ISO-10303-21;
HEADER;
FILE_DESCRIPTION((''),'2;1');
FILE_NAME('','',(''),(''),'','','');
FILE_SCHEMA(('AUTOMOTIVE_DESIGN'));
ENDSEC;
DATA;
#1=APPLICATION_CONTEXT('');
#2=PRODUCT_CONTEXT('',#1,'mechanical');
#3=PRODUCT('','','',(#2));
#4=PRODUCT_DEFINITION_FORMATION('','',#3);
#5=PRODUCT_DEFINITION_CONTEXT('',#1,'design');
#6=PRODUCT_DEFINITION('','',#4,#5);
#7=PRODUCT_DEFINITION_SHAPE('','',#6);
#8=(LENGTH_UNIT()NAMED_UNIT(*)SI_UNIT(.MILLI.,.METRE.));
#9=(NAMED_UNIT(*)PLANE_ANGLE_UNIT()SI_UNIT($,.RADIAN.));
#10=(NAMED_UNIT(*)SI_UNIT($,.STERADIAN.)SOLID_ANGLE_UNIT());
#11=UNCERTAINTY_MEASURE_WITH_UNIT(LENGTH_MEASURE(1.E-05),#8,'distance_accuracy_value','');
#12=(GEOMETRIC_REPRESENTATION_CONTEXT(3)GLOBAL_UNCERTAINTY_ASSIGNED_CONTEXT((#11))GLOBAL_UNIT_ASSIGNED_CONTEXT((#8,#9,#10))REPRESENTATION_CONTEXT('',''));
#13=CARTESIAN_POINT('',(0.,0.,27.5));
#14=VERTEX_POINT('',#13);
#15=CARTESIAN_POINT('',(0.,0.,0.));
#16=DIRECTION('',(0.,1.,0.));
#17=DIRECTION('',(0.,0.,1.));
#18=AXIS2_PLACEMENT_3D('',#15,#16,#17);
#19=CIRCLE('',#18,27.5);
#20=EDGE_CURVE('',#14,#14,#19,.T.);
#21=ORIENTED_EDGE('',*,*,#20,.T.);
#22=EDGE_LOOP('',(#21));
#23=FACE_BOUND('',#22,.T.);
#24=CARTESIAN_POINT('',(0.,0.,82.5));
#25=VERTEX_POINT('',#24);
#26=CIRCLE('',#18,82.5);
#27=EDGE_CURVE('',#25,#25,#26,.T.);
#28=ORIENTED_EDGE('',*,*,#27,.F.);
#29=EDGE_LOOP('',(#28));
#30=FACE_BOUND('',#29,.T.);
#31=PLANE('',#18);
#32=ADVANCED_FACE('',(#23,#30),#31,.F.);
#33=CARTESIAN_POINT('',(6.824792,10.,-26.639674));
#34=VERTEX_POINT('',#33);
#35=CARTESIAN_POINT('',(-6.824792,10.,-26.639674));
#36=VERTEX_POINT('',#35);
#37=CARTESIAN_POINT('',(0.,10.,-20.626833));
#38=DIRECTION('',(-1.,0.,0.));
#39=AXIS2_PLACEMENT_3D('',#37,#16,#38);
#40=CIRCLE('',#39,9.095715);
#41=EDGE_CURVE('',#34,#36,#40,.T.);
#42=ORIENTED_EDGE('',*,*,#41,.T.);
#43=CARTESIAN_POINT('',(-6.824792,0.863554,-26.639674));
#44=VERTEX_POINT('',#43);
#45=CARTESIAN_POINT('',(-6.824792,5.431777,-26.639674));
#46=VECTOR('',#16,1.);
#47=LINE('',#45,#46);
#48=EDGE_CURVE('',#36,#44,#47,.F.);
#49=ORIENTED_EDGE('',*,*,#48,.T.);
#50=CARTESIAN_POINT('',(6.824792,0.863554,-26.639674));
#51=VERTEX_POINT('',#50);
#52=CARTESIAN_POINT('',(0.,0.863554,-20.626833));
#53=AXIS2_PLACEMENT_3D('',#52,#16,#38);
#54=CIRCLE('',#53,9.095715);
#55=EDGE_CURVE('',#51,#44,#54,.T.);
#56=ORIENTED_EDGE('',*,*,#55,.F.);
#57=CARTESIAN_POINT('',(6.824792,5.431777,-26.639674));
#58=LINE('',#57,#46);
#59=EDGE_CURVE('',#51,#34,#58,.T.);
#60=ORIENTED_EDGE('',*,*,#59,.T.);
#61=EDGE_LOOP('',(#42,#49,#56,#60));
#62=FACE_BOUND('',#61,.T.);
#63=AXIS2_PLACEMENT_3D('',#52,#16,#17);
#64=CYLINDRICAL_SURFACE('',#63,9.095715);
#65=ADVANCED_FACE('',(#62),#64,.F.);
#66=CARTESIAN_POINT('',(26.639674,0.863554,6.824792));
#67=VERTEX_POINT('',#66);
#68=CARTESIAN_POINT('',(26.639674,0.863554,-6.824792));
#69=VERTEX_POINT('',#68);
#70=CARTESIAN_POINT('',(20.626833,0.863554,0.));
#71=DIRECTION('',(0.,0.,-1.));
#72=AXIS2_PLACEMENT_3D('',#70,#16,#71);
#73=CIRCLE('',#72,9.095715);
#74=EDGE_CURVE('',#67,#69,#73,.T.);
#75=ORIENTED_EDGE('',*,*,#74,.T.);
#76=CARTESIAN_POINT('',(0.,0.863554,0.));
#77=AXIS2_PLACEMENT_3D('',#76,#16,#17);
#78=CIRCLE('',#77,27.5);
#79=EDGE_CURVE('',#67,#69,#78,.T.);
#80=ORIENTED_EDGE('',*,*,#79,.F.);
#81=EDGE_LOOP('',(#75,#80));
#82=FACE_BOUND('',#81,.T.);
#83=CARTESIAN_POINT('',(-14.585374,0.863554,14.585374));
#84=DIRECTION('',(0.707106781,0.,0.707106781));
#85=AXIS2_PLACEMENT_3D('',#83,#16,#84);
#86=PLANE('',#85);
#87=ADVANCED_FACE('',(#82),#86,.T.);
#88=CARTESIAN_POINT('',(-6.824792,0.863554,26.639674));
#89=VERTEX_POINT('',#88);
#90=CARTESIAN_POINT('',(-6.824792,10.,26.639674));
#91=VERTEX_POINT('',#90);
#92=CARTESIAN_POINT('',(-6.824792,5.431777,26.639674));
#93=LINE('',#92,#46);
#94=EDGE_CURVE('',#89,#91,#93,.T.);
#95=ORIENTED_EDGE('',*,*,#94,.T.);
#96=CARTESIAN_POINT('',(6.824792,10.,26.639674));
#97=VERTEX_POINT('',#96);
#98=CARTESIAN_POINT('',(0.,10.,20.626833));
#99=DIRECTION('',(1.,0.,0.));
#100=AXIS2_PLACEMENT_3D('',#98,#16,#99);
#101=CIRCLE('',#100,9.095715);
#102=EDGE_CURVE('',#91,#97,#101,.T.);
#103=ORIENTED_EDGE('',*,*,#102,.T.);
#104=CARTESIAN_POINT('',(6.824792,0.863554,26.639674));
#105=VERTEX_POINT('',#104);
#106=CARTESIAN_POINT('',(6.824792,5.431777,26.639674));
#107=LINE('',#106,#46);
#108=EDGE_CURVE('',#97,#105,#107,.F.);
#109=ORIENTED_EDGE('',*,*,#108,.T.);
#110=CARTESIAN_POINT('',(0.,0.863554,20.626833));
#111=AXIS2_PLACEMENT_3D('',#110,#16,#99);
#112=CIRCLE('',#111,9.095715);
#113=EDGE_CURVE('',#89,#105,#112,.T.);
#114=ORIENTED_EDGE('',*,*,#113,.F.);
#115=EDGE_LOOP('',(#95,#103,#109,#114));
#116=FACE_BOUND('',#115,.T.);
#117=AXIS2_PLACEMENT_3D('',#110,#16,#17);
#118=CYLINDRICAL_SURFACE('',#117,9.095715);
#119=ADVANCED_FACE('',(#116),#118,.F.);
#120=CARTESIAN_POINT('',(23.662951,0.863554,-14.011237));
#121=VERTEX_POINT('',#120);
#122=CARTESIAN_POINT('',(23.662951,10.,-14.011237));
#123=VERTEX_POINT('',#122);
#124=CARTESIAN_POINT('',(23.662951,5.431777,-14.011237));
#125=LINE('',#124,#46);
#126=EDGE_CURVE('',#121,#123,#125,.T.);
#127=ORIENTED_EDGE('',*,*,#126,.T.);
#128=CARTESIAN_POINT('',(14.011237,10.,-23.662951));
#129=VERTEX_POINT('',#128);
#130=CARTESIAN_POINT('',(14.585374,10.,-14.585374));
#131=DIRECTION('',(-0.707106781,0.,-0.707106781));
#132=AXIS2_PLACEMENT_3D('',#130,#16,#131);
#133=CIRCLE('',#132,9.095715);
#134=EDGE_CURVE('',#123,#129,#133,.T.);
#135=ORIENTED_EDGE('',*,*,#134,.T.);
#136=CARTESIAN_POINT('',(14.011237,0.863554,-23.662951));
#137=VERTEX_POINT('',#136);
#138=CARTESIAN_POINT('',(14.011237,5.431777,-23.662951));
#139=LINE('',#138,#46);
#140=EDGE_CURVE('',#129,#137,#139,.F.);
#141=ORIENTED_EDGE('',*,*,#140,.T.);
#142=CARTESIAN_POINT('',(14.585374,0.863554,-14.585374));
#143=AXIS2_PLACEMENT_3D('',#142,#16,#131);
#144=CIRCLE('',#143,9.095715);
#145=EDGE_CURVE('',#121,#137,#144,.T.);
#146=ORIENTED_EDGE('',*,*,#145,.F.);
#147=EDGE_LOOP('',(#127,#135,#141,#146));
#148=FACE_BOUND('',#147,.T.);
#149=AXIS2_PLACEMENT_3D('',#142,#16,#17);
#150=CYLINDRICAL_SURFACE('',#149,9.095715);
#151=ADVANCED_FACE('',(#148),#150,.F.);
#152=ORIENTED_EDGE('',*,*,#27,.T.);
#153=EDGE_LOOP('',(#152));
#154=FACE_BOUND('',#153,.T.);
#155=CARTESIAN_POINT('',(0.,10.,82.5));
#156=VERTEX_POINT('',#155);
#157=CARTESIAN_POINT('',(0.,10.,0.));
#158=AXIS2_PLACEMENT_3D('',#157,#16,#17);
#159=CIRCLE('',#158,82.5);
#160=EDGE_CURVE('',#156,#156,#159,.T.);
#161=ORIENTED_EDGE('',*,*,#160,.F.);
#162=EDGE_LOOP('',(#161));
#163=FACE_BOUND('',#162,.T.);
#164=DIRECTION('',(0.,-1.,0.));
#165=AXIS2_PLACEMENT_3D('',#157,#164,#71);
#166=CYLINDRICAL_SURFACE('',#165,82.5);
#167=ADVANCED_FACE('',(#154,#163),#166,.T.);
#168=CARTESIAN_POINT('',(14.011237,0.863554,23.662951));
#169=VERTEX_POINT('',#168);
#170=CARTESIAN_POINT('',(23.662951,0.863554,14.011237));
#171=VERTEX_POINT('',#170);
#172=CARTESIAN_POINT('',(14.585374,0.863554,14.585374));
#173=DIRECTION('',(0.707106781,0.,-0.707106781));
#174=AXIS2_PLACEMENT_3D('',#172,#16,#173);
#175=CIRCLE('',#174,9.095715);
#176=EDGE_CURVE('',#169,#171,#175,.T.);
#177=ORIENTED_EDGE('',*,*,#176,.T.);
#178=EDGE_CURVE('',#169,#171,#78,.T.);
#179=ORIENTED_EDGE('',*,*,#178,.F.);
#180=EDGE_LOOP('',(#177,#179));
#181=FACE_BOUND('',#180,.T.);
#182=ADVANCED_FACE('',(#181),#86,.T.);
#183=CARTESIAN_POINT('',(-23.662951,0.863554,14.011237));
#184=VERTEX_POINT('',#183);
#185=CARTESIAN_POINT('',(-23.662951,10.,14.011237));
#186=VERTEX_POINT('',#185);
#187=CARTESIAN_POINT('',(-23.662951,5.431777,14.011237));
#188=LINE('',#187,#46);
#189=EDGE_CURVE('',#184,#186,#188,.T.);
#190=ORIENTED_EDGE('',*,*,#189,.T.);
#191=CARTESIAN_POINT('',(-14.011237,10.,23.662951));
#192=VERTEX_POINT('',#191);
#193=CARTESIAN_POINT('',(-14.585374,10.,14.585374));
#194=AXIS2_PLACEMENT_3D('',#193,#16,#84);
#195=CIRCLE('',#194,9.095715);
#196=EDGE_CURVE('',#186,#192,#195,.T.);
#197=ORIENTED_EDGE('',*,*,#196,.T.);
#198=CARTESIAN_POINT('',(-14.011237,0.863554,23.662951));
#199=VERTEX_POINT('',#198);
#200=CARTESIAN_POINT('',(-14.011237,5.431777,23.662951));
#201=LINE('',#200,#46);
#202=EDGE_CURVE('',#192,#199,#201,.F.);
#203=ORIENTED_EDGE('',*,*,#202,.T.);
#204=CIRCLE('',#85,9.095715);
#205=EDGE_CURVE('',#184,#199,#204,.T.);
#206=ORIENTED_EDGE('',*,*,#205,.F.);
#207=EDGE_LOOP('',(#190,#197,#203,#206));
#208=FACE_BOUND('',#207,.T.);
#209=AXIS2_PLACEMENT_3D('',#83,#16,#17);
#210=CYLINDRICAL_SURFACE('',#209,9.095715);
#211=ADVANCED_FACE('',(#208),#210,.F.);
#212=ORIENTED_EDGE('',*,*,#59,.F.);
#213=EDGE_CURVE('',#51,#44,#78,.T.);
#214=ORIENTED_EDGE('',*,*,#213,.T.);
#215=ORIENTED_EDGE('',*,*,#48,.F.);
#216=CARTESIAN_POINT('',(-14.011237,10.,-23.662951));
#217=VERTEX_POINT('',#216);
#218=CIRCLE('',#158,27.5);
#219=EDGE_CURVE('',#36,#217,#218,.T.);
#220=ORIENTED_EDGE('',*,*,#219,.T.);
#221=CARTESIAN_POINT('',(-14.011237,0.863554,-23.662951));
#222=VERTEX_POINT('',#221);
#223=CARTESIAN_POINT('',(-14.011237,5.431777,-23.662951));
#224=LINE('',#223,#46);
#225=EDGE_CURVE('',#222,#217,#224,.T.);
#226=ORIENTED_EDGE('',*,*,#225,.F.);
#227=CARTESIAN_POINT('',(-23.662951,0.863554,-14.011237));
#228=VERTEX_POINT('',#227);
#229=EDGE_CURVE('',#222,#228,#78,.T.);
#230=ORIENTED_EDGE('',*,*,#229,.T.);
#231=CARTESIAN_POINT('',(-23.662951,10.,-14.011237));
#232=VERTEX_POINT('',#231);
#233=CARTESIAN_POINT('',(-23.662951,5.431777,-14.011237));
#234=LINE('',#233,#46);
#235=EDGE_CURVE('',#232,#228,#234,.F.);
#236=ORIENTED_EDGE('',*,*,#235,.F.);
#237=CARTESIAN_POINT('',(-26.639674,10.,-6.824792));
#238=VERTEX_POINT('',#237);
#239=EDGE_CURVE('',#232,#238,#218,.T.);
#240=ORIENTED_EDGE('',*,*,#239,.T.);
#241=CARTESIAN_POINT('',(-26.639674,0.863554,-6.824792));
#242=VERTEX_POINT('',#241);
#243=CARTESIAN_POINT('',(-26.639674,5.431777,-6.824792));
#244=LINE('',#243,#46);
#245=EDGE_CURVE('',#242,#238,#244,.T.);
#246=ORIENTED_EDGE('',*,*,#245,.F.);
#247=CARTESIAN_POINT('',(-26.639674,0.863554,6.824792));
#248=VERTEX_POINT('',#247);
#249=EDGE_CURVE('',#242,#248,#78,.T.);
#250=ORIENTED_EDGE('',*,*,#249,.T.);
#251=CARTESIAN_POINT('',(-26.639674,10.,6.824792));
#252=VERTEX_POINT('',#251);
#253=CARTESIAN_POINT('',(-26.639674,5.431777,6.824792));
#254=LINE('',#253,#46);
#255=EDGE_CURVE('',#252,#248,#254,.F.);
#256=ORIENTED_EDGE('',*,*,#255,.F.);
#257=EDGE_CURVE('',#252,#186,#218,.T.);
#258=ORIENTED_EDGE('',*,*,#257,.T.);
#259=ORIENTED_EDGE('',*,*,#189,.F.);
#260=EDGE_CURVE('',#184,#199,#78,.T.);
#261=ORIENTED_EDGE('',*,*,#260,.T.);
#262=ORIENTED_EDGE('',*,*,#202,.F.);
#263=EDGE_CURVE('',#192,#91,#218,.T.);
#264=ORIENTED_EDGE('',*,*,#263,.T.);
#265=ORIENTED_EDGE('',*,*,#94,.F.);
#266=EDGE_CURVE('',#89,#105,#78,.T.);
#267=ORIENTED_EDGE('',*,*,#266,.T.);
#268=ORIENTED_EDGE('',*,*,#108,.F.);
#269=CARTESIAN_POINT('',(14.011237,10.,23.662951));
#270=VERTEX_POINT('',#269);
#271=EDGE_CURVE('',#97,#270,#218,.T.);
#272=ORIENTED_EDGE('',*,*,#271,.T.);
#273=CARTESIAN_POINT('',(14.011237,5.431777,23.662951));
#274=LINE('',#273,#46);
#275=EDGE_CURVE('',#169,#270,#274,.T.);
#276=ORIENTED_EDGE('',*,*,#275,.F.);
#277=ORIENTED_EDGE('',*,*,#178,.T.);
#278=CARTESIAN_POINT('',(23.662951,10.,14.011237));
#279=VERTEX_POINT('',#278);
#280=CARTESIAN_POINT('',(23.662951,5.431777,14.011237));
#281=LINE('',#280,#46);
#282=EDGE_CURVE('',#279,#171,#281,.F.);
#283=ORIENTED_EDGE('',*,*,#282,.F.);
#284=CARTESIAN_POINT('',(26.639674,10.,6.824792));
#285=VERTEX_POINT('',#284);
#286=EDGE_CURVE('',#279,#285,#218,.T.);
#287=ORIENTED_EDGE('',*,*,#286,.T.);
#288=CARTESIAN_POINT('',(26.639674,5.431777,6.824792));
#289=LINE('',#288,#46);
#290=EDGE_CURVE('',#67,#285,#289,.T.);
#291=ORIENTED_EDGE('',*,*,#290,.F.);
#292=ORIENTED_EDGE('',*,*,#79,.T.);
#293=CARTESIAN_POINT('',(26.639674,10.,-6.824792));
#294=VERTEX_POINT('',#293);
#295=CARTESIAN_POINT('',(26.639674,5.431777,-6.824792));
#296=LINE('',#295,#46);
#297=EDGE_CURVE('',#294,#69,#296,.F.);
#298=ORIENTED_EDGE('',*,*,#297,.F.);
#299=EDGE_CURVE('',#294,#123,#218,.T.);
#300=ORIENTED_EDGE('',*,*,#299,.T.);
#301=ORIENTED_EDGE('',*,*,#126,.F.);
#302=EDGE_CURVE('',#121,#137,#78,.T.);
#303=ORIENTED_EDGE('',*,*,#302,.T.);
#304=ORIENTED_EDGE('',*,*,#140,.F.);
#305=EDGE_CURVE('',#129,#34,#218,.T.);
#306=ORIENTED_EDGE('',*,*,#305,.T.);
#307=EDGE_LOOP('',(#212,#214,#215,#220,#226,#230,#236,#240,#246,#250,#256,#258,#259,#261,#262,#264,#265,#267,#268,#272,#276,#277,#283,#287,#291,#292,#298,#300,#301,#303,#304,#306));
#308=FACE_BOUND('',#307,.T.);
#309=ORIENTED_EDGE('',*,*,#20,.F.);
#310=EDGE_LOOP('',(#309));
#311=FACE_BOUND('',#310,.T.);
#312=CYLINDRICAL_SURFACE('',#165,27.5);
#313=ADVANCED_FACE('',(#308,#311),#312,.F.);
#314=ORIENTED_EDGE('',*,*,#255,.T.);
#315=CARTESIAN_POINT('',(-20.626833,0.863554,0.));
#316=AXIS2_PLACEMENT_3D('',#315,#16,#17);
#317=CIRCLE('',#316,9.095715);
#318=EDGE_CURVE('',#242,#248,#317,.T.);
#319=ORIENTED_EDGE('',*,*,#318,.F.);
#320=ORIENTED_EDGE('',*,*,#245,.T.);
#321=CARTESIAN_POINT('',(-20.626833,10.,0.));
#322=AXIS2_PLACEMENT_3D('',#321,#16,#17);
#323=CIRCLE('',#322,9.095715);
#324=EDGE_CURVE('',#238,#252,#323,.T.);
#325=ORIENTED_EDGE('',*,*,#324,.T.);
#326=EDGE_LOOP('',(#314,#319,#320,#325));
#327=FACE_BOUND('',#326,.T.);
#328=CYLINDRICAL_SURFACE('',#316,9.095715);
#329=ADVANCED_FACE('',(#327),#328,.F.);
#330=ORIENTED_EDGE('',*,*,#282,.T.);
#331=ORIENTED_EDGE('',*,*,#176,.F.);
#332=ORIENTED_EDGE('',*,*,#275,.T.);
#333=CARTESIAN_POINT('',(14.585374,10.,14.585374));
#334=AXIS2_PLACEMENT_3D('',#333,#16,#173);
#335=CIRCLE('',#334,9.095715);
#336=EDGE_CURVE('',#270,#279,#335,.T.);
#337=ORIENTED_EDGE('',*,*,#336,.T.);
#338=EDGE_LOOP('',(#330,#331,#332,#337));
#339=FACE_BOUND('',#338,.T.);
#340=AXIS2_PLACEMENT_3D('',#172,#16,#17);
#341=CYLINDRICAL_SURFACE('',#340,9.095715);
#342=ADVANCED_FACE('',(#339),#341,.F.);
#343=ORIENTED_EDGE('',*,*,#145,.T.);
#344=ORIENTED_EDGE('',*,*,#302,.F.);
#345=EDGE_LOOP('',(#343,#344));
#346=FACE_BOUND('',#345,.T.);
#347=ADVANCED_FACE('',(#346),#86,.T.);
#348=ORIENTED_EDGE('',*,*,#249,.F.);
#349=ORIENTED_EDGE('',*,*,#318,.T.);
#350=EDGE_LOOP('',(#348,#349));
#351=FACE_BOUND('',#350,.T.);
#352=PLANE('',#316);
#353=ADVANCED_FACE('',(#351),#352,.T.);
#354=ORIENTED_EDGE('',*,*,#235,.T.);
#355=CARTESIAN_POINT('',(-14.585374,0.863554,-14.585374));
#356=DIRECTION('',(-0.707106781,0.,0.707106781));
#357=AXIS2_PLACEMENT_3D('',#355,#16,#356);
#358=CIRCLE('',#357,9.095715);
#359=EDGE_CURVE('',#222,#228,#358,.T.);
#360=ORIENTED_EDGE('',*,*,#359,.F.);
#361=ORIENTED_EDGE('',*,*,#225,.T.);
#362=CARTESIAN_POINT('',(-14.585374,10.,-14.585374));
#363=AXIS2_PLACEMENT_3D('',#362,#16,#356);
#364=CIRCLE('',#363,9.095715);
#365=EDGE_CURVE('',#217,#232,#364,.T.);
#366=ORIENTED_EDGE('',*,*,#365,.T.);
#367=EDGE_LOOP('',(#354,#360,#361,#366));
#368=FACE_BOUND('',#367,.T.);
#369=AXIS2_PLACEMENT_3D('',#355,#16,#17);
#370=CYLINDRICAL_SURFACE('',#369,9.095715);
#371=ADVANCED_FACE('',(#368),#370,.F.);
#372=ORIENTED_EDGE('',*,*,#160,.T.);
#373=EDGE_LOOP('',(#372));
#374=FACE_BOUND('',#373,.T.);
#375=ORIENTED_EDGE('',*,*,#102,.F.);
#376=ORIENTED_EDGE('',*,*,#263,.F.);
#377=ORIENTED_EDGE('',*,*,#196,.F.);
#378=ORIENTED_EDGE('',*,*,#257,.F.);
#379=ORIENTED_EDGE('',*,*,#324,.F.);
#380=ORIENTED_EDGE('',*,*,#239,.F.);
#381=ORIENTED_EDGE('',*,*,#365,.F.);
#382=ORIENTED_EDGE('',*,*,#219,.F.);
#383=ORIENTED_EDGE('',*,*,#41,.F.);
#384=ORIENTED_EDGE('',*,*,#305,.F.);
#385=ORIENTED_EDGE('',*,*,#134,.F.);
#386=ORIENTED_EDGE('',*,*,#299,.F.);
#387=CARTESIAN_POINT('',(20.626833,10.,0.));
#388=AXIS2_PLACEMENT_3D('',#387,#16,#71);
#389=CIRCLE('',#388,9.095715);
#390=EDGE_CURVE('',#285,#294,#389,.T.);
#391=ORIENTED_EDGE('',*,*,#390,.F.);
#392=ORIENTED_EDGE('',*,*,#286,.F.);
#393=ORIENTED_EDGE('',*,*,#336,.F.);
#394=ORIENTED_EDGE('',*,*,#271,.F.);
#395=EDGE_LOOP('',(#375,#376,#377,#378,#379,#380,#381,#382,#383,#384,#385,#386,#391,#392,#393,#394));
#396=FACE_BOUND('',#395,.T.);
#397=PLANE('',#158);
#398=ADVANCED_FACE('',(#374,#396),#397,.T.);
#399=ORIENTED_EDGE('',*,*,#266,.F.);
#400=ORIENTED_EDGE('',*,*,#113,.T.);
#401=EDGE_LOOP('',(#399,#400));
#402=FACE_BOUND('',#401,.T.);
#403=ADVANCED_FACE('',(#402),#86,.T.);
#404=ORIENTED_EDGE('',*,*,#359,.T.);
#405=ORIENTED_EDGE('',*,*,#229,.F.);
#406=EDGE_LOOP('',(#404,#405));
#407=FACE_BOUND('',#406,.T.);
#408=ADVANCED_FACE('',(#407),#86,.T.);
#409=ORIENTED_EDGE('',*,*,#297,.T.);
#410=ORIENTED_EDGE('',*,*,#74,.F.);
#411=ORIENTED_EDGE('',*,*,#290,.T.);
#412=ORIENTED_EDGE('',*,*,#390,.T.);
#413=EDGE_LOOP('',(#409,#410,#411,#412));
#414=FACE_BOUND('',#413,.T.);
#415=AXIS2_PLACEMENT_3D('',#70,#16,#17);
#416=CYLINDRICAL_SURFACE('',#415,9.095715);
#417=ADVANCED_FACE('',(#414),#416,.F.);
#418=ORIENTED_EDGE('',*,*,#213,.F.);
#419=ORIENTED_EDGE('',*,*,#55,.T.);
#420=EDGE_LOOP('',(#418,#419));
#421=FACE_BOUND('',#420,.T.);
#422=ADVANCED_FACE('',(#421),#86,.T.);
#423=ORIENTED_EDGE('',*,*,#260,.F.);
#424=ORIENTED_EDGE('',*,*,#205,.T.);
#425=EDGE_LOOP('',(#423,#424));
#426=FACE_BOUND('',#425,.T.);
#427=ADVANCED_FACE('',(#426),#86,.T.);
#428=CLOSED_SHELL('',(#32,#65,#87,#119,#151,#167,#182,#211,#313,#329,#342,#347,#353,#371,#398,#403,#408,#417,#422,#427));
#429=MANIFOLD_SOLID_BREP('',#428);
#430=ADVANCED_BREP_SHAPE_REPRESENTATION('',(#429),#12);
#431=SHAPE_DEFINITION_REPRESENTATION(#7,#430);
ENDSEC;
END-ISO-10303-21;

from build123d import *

# Parameters (mm, degrees)
SKETCH1_R           = 82.5
BOSS_EXTRUDE1_DEPTH = 10
SKETCH2_R           = 27.5
CUT_EXTRUDE1_DEPTH  = 118.100384286
SKETCH3_R           = 9.095715255
CUT_EXTRUDE2_DEPTH  = 9.136446443
CIRPATTERN1_COUNT   = 8


with BuildPart() as part:
    # Sketch1 → Boss-Extrude1 (new body)
    with BuildSketch(Plane(origin=(0, 0, 0), x_dir=(1, 0, 0), z_dir=(0, 1, 0))):
        Circle(SKETCH1_R)
    extrude(amount=BOSS_EXTRUDE1_DEPTH)

    # Sketch2 → Cut-Extrude1 (cut, through all)
    with BuildSketch(Plane(origin=(0, 0, 0), x_dir=(1, 0, 0), z_dir=(0, 1, 0))):
        Circle(SKETCH2_R)
    extrude(amount=CUT_EXTRUDE1_DEPTH, mode=Mode.SUBTRACT)

    # Sketch3 → Cut-Extrude2 (cut)
    with BuildSketch(Plane(origin=(0, 10, 0), x_dir=(1, 0, 0), z_dir=(0, 1, 0))):
        with Locations((-20.626833442, 0)):
            Circle(SKETCH3_R)
    cut_extrude2 = extrude(amount=-CUT_EXTRUDE2_DEPTH, mode=Mode.SUBTRACT)

    # CirPattern1: Cut-Extrude2 ×8 about axis
    cirpattern1_axis = Axis((0, 0, 0), (0, 1, 0))
    for i in range(1, CIRPATTERN1_COUNT):
        add(cut_extrude2.rotate(cirpattern1_axis, i * 360 / CIRPATTERN1_COUNT), mode=Mode.SUBTRACT)


solid = part.part
